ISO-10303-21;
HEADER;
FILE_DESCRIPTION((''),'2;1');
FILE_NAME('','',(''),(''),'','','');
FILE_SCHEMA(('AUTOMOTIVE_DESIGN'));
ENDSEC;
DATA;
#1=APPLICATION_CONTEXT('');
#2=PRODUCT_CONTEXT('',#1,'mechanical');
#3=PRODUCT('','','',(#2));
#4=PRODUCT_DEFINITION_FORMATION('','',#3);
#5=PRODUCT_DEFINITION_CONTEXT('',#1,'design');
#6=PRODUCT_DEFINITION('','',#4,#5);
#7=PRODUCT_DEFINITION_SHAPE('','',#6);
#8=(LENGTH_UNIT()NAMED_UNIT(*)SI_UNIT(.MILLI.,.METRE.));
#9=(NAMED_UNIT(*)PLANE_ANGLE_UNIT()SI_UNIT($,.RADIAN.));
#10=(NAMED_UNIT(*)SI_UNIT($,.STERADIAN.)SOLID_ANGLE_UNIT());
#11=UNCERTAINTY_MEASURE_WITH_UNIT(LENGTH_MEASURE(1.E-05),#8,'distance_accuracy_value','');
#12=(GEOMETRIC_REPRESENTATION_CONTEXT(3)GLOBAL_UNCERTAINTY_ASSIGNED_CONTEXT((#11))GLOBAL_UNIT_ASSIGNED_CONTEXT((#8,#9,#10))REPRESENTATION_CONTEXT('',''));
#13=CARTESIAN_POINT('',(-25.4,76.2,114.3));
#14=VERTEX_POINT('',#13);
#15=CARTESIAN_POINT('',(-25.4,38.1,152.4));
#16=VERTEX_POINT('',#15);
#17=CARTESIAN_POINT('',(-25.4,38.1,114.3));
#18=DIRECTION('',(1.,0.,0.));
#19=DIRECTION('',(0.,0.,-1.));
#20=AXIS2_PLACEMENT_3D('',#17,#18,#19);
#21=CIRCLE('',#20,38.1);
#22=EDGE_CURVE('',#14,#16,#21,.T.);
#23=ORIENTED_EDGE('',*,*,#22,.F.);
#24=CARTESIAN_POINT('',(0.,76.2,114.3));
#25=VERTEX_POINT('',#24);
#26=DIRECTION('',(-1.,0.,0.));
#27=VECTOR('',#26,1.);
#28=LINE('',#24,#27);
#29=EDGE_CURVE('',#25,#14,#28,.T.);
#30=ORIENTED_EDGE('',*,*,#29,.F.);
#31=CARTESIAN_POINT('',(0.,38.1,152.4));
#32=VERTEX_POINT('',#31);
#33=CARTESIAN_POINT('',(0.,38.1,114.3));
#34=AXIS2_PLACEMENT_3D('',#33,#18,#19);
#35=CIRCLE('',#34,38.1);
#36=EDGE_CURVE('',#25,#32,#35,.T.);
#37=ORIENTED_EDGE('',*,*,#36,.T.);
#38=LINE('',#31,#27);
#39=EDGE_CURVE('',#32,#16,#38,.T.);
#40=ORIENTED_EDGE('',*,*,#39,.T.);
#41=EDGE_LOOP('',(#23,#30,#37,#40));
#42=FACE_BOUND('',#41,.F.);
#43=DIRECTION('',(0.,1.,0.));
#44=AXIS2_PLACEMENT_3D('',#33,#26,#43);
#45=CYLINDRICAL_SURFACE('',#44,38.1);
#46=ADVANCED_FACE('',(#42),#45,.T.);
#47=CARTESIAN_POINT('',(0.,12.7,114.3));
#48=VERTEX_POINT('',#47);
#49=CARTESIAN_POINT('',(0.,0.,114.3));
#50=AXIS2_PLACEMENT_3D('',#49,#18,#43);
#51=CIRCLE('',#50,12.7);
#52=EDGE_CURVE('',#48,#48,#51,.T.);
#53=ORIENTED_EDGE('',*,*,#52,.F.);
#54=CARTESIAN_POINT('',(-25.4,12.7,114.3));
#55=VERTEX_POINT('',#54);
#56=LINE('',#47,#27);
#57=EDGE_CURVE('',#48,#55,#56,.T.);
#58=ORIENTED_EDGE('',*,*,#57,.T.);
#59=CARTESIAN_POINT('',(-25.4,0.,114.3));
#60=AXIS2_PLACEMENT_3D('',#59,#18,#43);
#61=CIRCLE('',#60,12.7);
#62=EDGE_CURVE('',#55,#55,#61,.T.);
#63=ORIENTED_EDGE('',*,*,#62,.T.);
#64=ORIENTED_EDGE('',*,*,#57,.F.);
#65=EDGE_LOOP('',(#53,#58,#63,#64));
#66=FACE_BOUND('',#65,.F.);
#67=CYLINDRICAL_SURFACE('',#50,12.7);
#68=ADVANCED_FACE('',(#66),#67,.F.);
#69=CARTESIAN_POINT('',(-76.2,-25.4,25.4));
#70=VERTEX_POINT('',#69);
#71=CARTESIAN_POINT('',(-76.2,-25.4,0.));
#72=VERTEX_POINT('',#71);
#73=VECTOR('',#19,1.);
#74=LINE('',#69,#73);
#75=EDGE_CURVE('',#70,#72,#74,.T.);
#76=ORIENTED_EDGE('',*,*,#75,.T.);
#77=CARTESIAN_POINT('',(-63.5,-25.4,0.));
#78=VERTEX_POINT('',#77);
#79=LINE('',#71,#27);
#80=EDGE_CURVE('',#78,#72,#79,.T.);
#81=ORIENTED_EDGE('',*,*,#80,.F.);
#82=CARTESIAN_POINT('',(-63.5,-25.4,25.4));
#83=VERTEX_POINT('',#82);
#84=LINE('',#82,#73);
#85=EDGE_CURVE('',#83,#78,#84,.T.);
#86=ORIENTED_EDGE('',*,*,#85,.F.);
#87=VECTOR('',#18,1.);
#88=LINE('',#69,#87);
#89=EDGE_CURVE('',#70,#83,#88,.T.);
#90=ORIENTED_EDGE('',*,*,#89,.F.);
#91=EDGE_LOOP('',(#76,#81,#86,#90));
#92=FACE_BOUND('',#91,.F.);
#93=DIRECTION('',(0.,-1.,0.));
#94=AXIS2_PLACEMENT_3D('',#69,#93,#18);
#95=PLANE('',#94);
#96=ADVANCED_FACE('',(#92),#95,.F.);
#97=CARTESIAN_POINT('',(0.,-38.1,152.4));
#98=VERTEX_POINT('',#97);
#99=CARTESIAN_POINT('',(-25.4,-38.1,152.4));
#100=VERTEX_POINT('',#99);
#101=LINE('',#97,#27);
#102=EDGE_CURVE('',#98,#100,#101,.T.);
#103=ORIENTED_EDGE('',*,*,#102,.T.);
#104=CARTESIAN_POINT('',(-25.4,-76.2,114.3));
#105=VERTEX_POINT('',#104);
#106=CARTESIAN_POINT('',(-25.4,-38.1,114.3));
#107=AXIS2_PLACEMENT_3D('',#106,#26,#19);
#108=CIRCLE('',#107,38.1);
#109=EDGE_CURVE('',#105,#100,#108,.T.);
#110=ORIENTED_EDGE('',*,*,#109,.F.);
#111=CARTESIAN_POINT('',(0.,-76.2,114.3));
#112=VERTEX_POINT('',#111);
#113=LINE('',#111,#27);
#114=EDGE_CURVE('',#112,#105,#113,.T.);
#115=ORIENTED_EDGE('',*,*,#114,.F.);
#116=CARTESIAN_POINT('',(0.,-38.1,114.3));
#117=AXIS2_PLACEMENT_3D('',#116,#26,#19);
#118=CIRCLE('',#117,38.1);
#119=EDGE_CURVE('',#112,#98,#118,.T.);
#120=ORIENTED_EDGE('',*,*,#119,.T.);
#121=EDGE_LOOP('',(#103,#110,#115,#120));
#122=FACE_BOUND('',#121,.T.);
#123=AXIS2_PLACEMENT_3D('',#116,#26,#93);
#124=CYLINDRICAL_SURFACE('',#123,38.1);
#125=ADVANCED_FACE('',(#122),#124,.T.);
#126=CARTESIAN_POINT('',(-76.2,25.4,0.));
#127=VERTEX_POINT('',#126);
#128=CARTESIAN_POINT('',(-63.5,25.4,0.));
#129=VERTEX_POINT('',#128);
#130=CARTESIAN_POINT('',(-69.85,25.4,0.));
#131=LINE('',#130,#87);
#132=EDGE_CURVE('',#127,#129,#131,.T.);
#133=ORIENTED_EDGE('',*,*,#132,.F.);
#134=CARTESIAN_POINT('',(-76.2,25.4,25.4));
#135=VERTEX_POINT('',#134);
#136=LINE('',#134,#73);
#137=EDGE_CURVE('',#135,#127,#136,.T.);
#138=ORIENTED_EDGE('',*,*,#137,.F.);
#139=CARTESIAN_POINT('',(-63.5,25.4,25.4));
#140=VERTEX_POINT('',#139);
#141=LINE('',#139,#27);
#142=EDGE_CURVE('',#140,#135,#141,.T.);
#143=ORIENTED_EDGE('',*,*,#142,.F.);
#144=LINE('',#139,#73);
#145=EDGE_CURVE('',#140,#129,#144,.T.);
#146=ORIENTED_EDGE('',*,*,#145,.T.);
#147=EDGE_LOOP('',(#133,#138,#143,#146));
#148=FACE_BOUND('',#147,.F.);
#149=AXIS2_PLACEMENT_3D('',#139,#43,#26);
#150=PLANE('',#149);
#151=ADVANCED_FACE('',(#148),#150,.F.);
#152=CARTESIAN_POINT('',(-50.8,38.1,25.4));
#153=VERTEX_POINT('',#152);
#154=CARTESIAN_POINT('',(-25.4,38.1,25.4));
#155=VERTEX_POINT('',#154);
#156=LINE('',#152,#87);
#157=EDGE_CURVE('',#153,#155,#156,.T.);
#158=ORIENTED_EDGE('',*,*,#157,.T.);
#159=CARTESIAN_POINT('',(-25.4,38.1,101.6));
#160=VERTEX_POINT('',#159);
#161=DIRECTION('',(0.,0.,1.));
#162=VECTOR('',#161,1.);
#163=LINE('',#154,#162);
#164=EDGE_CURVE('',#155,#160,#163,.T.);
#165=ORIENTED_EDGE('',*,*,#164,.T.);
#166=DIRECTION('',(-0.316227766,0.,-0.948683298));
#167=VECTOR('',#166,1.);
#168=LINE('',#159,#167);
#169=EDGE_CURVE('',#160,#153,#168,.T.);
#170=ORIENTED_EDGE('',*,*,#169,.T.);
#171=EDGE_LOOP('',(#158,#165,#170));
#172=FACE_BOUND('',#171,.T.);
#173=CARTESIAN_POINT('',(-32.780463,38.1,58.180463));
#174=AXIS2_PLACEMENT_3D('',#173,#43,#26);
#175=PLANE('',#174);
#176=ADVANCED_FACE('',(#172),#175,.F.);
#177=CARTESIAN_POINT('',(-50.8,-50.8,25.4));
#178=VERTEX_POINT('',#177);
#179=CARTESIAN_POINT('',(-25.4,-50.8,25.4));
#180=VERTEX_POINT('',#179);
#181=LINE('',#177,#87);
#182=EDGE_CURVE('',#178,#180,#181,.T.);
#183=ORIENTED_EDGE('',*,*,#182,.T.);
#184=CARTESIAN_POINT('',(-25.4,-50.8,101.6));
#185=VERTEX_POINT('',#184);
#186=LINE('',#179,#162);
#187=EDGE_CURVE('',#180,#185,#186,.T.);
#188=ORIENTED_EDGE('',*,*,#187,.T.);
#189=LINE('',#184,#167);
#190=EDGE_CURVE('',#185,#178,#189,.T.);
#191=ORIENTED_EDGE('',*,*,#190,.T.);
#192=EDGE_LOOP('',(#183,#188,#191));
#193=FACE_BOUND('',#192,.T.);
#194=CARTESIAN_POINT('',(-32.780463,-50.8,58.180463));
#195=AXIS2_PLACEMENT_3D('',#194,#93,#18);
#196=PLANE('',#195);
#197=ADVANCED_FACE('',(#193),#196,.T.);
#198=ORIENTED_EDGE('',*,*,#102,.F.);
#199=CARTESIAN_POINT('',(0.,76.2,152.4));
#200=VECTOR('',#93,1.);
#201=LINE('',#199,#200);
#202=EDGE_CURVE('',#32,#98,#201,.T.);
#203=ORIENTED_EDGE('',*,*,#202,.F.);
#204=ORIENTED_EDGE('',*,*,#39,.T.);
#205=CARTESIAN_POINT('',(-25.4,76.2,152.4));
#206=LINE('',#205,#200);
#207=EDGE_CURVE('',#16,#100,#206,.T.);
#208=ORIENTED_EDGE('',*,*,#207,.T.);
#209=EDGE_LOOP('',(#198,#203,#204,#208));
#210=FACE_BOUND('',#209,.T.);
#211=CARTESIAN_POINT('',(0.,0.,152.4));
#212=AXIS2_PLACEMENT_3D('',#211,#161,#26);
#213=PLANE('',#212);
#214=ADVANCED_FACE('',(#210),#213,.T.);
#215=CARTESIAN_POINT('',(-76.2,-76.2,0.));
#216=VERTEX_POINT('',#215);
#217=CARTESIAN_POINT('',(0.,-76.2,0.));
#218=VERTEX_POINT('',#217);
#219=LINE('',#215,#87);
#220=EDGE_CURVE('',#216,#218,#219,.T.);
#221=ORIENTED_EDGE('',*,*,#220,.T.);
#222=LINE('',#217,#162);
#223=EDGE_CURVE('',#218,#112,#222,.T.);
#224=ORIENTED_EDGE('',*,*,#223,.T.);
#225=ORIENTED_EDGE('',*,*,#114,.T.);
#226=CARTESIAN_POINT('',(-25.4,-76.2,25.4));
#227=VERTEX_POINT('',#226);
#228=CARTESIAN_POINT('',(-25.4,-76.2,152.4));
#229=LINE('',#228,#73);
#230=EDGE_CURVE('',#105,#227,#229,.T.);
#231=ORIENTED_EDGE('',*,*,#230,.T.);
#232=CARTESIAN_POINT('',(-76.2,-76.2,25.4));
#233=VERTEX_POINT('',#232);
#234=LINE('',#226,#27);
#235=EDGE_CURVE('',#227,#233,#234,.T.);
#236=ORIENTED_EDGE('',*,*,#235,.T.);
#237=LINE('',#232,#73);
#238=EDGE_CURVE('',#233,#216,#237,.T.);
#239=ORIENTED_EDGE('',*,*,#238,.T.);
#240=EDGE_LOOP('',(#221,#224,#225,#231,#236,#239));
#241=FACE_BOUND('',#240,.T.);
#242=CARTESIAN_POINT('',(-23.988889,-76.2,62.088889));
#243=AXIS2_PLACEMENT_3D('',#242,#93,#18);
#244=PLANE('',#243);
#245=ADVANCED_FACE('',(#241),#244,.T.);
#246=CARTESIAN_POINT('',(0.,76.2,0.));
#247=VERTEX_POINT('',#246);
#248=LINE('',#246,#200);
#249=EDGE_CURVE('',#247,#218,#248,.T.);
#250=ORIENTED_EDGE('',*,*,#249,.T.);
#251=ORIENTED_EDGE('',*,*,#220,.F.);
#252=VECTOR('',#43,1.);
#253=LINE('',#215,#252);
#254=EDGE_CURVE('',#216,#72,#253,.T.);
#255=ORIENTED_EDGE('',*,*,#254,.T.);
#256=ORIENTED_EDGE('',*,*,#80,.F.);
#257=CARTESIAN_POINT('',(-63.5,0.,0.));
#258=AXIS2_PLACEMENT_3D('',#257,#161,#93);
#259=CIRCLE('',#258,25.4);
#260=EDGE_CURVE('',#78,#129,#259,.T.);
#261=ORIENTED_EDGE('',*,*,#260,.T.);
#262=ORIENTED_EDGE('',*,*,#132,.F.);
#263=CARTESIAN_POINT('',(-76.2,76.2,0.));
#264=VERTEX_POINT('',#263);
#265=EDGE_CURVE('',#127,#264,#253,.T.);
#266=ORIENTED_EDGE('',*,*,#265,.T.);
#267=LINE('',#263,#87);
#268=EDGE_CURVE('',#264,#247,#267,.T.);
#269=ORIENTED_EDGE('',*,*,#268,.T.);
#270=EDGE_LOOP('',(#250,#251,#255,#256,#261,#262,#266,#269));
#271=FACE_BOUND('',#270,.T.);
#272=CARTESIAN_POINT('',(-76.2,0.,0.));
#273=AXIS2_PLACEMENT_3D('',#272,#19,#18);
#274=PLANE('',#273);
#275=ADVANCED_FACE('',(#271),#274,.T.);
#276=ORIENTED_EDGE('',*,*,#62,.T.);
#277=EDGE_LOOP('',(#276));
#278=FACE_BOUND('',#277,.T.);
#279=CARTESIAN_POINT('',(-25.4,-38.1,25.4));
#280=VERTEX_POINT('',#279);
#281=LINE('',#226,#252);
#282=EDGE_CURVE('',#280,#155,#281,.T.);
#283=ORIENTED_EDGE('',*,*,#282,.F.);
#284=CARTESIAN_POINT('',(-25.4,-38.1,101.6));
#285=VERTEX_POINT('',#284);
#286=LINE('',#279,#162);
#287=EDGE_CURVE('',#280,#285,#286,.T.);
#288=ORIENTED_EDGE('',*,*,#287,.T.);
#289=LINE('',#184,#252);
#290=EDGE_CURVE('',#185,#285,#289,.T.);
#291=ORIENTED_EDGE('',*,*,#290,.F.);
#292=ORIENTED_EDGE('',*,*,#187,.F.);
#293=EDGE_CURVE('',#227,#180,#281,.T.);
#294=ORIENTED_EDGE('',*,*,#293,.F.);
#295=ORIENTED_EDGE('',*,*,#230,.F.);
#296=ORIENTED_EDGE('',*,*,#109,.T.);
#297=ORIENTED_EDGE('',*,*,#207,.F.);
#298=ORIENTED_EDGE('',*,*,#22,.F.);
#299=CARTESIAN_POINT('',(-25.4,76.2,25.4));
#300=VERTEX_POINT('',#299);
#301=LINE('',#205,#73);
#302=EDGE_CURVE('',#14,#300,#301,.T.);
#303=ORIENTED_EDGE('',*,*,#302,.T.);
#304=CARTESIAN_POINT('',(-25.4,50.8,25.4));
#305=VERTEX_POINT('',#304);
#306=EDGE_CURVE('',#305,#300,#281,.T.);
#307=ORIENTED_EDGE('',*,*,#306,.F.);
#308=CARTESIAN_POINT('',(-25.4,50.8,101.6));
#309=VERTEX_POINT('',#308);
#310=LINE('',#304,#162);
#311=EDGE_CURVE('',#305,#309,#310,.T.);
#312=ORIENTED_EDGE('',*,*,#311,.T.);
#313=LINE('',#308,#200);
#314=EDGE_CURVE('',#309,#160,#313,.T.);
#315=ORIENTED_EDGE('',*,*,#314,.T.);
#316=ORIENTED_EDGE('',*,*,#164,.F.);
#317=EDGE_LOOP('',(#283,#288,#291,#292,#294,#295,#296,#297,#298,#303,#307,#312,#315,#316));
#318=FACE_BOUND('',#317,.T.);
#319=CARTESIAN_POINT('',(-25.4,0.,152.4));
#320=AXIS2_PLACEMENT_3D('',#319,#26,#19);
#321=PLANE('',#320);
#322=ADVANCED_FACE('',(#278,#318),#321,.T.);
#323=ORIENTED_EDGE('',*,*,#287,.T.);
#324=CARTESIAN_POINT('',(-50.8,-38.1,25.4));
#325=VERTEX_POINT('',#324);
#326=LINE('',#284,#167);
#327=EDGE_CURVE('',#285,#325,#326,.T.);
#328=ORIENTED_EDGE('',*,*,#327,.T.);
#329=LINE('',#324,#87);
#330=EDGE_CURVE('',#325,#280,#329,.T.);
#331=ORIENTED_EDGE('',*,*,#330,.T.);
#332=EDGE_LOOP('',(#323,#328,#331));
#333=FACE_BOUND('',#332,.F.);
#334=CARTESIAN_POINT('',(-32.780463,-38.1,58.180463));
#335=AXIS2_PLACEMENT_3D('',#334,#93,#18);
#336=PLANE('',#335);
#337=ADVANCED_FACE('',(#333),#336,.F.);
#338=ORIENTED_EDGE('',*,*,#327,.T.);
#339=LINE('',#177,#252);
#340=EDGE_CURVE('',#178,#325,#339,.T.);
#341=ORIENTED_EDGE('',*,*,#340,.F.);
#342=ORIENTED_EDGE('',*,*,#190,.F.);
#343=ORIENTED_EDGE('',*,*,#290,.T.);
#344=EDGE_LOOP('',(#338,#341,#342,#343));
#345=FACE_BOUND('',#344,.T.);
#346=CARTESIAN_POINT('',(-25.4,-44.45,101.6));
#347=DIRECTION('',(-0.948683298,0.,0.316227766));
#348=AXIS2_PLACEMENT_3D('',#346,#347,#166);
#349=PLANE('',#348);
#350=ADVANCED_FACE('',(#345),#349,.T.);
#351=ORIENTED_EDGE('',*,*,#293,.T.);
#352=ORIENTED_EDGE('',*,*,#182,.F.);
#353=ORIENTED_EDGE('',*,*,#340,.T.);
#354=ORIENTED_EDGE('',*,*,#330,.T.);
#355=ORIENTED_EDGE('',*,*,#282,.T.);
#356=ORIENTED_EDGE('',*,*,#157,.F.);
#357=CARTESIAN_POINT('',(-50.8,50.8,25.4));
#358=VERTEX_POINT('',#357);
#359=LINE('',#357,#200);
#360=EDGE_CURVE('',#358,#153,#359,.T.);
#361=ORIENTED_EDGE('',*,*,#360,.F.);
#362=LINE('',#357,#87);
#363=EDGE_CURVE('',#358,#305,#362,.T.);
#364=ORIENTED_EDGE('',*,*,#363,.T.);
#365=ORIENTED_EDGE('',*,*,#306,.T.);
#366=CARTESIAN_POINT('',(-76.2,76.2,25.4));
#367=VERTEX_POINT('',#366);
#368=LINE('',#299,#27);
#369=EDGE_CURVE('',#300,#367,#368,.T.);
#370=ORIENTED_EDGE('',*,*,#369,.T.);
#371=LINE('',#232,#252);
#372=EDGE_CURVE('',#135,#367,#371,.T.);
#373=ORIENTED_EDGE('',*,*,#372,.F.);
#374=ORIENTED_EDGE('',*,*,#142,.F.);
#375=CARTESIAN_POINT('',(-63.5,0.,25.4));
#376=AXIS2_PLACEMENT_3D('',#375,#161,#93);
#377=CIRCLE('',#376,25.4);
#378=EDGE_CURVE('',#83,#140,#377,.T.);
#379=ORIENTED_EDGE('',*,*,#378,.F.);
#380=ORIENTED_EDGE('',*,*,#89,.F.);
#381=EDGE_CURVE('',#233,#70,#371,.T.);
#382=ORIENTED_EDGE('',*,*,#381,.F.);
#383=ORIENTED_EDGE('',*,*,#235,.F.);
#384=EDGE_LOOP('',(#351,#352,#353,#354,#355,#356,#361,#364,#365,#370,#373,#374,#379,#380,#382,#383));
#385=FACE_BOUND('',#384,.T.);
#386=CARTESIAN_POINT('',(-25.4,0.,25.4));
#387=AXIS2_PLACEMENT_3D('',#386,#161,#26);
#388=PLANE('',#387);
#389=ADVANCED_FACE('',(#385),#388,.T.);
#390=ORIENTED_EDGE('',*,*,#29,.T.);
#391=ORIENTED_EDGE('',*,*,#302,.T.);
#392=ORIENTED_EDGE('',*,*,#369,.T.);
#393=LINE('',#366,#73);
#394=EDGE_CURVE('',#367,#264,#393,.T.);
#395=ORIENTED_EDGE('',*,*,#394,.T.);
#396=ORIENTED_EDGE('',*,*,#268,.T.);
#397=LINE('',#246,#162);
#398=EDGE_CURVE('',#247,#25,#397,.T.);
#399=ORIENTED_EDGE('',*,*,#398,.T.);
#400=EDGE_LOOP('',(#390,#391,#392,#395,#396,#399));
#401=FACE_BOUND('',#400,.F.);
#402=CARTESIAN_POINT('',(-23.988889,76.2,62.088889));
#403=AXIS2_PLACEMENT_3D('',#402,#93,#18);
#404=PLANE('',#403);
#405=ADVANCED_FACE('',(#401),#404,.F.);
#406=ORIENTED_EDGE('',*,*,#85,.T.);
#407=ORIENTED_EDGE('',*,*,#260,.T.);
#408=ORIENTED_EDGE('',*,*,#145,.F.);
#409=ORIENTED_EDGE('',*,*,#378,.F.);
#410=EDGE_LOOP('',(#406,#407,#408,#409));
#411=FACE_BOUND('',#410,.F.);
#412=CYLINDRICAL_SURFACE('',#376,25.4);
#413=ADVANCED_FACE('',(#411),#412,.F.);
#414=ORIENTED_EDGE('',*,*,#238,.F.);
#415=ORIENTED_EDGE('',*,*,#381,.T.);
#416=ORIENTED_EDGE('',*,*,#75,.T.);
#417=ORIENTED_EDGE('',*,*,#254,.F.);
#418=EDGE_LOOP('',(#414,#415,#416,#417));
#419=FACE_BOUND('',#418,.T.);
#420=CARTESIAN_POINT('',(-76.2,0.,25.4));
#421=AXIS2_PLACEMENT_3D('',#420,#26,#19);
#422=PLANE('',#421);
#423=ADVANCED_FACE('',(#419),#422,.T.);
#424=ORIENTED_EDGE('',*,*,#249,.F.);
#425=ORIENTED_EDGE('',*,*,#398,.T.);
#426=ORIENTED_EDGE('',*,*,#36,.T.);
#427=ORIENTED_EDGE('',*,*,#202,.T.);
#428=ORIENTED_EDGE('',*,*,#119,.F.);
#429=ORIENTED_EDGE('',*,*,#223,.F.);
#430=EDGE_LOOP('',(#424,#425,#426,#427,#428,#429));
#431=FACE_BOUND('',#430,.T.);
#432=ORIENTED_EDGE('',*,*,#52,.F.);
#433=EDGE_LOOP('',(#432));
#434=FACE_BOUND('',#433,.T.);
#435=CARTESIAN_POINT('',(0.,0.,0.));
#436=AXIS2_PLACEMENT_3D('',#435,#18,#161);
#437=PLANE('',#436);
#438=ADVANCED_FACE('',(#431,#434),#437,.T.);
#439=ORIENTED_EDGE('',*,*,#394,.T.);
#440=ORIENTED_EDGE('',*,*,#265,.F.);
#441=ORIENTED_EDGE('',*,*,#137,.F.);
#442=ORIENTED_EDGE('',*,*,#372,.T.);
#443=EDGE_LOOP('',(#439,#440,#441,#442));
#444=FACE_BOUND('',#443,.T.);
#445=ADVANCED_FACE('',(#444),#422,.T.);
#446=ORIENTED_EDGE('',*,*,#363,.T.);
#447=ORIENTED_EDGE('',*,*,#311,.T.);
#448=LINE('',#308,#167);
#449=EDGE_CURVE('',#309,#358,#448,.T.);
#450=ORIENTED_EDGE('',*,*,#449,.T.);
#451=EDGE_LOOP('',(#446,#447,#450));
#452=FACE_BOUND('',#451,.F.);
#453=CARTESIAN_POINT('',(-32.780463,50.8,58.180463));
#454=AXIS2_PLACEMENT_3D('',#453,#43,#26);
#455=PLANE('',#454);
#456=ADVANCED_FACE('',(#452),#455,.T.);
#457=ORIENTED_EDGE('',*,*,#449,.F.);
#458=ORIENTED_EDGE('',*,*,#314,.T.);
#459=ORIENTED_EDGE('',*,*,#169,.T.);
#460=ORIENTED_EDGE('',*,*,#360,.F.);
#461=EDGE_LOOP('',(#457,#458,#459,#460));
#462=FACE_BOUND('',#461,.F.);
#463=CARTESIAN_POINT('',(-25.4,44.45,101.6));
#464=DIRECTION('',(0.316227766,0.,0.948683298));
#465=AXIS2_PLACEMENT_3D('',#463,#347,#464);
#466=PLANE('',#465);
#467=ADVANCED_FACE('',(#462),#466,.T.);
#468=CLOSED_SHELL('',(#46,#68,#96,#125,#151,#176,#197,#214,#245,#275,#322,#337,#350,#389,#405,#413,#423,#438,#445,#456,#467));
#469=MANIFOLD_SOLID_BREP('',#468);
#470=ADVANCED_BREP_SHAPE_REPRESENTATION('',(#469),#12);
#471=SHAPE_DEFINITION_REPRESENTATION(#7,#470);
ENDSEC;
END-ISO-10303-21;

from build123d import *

# Parameters (mm, degrees)
F1_DEPTH = 76.2
F2_R     = 12.7
F3_DEPTH = 76.201
F5_DEPTH = 25.401
F6_R     = 38.1
F9_DEPTH = 6.35


# Not quite as in the source:
# - a pattern or mirror of a feature is missing from the dataset's text; its kind, count and spacing are read off the source's solid


with BuildPart() as f1:
    # F0 (on Front) → F1 (new body, symmetric)
    with BuildSketch(Plane.XZ):
        Polygon((-76.2, 0), (0, 0), (0, 152.4), (-25.4, 152.4), (-25.4, 25.4), (-76.2, 25.4), align=None)
    extrude(amount=F1_DEPTH, both=True)

    # F2 (on Right) → F3 (cut, through all)
    with BuildSketch(Plane.YZ):
        with Locations((0, 114.3)):
            Circle(F2_R)
    extrude(amount=-F3_DEPTH, mode=Mode.SUBTRACT)

    # F4 (on face) → F5 (cut, through all)
    with BuildSketch(Plane.XY.offset(25.4)):
        with BuildLine():
            Line((-63.5, 25.4), (-76.2, 25.4))
            Line((-76.2, 25.4), (-76.2, -25.4))
            Line((-76.2, -25.4), (-63.5, -25.4))
            ThreePointArc((-63.5, -25.4), (-38.1, 0), (-63.5, 25.4))
        make_face()
    extrude(amount=-F5_DEPTH, mode=Mode.SUBTRACT)

    # F6
    f6_edges = [f1.edges().sort_by_distance(p)[0] for p in [
        (-12.7, -76.2, 152.4),
        (-12.7, 76.2, 152.4),
    ]]
    fillet(f6_edges, radius=F6_R)

    # F8 (on offset) → F9 (join, symmetric)
    with BuildSketch(Plane.XZ.offset(44.45)):
        Polygon((-50.8, 25.4), (-25.4, 25.4), (-25.4, 101.6), align=None)
    f9 = extrude(amount=F9_DEPTH, both=True)

    # F9_copies: F9 across plane
    add(f9.mirror(Plane.ZX))


solid = f1.part
